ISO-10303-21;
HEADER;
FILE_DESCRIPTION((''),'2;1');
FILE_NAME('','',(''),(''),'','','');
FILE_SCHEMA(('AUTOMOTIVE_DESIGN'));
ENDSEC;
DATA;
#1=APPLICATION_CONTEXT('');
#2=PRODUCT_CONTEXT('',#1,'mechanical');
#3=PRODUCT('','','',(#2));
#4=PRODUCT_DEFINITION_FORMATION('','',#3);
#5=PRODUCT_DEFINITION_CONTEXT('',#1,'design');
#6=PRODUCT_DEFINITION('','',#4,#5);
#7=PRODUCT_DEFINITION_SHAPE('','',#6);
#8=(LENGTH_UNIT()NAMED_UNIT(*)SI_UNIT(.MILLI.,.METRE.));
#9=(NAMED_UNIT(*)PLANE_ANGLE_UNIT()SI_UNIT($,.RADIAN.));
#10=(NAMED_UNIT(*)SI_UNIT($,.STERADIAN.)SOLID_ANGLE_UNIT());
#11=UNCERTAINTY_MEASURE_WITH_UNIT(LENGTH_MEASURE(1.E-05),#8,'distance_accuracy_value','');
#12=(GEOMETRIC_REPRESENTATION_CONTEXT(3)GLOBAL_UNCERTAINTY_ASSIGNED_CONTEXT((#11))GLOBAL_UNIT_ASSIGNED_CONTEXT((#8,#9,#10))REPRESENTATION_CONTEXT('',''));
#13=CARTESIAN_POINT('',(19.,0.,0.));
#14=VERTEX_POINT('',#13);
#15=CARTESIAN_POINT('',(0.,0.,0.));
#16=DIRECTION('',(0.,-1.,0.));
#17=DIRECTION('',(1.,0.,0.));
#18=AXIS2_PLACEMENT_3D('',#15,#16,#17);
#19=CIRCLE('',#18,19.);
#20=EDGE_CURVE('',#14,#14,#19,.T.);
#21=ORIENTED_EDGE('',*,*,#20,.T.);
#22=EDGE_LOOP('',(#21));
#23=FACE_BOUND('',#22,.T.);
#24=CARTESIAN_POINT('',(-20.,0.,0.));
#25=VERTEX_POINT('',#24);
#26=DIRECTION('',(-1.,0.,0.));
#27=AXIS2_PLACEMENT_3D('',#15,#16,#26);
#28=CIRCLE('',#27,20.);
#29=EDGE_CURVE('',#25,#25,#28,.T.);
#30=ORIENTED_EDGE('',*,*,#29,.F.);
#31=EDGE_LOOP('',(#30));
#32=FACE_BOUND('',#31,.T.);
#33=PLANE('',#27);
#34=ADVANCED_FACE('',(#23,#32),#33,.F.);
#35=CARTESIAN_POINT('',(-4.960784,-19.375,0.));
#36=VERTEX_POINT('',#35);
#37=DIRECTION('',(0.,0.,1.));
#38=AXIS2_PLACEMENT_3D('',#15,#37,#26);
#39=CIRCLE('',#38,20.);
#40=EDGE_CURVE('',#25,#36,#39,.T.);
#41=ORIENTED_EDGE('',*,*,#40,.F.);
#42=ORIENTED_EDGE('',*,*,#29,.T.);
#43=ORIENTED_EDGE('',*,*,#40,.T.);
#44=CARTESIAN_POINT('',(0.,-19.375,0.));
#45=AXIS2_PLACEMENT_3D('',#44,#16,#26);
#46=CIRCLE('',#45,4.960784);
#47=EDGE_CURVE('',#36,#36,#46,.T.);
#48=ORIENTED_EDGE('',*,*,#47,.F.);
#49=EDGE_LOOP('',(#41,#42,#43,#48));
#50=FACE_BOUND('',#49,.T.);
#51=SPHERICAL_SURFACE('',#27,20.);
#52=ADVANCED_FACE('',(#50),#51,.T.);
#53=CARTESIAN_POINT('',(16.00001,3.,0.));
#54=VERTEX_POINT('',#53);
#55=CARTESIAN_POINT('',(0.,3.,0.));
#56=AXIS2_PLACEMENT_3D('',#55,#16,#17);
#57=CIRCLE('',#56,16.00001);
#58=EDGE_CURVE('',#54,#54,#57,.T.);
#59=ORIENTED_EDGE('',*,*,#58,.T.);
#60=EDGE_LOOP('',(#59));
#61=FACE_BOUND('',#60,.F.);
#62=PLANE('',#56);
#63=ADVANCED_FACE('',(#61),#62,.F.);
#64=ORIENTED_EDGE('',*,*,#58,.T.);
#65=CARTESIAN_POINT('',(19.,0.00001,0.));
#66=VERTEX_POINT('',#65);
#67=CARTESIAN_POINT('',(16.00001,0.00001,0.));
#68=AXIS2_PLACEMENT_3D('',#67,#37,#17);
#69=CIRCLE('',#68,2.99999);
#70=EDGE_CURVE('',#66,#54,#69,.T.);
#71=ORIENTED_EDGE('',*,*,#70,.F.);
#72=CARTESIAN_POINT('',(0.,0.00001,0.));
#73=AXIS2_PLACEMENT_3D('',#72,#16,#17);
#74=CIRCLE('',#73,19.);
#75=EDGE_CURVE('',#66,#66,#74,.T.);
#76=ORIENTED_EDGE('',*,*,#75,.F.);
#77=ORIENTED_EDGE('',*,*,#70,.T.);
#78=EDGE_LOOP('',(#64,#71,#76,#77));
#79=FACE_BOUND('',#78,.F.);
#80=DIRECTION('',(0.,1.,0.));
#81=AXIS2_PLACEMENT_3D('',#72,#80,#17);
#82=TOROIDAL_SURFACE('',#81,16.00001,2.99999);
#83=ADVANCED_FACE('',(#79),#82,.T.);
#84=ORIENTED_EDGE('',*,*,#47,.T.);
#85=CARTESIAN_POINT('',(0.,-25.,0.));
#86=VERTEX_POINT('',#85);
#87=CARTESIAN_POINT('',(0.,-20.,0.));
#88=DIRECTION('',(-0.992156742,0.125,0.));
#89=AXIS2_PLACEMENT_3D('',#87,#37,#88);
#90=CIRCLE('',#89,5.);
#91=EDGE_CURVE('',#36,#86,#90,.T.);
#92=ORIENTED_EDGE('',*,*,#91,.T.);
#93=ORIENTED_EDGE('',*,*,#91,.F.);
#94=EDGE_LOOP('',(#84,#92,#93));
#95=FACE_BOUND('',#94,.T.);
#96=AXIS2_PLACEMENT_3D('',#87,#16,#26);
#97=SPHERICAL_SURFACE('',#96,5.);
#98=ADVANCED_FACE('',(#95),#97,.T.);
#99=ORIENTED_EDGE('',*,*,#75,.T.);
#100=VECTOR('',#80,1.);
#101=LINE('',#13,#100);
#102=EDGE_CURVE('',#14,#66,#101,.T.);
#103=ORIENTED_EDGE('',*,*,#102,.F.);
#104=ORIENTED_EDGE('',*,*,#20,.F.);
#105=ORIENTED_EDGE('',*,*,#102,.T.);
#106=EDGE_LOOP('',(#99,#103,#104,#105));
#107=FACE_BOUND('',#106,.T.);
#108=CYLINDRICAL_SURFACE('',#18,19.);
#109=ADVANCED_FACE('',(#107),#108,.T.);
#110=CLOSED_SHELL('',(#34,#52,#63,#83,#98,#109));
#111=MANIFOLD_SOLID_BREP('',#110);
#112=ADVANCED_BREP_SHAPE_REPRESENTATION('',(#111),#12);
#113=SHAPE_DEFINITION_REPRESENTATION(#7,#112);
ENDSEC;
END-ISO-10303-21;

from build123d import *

# Parameters (mm, degrees)
F2_R     = 19
F3_DEPTH = 3
F4_R     = 2.99999


# Not quite as in the source:
# - a fillet or chamfer is up to 0.001 mm smaller than in the source, because OpenCascade refuses the exact size


with BuildPart() as f1:
    # F0 (on Top) → F1 (revolve)
    with BuildSketch(Plane.XY):
        with BuildLine():
            Line((0, 0), (-20, 0))
            ThreePointArc((-20, 0), (-15.7989821534, -12.2634482474), (-4.9607837082, -19.375))
            ThreePointArc((-4.9607837082, -19.375), (-3.75, -23.3071891388), (0, -25))
            Line((0, -25), (0, -20))
            Line((0, -20), (0, 0))
        make_face()
    revolve(axis=Axis((0, -10, 0), (0, -1, 0)))

    # F2 (on Front) → F3 (join)
    with BuildSketch(Plane.XZ):
        Circle(F2_R)
    extrude(amount=-F3_DEPTH)

    # F4 (radius 3 in the source; OpenCascade refuses exactly that, so slightly less here)
    f4_edges = [f1.edges().sort_by_distance(p)[0] for p in [
        (-19, 3, 0),
    ]]
    fillet(f4_edges, radius=F4_R)


solid = f1.part
